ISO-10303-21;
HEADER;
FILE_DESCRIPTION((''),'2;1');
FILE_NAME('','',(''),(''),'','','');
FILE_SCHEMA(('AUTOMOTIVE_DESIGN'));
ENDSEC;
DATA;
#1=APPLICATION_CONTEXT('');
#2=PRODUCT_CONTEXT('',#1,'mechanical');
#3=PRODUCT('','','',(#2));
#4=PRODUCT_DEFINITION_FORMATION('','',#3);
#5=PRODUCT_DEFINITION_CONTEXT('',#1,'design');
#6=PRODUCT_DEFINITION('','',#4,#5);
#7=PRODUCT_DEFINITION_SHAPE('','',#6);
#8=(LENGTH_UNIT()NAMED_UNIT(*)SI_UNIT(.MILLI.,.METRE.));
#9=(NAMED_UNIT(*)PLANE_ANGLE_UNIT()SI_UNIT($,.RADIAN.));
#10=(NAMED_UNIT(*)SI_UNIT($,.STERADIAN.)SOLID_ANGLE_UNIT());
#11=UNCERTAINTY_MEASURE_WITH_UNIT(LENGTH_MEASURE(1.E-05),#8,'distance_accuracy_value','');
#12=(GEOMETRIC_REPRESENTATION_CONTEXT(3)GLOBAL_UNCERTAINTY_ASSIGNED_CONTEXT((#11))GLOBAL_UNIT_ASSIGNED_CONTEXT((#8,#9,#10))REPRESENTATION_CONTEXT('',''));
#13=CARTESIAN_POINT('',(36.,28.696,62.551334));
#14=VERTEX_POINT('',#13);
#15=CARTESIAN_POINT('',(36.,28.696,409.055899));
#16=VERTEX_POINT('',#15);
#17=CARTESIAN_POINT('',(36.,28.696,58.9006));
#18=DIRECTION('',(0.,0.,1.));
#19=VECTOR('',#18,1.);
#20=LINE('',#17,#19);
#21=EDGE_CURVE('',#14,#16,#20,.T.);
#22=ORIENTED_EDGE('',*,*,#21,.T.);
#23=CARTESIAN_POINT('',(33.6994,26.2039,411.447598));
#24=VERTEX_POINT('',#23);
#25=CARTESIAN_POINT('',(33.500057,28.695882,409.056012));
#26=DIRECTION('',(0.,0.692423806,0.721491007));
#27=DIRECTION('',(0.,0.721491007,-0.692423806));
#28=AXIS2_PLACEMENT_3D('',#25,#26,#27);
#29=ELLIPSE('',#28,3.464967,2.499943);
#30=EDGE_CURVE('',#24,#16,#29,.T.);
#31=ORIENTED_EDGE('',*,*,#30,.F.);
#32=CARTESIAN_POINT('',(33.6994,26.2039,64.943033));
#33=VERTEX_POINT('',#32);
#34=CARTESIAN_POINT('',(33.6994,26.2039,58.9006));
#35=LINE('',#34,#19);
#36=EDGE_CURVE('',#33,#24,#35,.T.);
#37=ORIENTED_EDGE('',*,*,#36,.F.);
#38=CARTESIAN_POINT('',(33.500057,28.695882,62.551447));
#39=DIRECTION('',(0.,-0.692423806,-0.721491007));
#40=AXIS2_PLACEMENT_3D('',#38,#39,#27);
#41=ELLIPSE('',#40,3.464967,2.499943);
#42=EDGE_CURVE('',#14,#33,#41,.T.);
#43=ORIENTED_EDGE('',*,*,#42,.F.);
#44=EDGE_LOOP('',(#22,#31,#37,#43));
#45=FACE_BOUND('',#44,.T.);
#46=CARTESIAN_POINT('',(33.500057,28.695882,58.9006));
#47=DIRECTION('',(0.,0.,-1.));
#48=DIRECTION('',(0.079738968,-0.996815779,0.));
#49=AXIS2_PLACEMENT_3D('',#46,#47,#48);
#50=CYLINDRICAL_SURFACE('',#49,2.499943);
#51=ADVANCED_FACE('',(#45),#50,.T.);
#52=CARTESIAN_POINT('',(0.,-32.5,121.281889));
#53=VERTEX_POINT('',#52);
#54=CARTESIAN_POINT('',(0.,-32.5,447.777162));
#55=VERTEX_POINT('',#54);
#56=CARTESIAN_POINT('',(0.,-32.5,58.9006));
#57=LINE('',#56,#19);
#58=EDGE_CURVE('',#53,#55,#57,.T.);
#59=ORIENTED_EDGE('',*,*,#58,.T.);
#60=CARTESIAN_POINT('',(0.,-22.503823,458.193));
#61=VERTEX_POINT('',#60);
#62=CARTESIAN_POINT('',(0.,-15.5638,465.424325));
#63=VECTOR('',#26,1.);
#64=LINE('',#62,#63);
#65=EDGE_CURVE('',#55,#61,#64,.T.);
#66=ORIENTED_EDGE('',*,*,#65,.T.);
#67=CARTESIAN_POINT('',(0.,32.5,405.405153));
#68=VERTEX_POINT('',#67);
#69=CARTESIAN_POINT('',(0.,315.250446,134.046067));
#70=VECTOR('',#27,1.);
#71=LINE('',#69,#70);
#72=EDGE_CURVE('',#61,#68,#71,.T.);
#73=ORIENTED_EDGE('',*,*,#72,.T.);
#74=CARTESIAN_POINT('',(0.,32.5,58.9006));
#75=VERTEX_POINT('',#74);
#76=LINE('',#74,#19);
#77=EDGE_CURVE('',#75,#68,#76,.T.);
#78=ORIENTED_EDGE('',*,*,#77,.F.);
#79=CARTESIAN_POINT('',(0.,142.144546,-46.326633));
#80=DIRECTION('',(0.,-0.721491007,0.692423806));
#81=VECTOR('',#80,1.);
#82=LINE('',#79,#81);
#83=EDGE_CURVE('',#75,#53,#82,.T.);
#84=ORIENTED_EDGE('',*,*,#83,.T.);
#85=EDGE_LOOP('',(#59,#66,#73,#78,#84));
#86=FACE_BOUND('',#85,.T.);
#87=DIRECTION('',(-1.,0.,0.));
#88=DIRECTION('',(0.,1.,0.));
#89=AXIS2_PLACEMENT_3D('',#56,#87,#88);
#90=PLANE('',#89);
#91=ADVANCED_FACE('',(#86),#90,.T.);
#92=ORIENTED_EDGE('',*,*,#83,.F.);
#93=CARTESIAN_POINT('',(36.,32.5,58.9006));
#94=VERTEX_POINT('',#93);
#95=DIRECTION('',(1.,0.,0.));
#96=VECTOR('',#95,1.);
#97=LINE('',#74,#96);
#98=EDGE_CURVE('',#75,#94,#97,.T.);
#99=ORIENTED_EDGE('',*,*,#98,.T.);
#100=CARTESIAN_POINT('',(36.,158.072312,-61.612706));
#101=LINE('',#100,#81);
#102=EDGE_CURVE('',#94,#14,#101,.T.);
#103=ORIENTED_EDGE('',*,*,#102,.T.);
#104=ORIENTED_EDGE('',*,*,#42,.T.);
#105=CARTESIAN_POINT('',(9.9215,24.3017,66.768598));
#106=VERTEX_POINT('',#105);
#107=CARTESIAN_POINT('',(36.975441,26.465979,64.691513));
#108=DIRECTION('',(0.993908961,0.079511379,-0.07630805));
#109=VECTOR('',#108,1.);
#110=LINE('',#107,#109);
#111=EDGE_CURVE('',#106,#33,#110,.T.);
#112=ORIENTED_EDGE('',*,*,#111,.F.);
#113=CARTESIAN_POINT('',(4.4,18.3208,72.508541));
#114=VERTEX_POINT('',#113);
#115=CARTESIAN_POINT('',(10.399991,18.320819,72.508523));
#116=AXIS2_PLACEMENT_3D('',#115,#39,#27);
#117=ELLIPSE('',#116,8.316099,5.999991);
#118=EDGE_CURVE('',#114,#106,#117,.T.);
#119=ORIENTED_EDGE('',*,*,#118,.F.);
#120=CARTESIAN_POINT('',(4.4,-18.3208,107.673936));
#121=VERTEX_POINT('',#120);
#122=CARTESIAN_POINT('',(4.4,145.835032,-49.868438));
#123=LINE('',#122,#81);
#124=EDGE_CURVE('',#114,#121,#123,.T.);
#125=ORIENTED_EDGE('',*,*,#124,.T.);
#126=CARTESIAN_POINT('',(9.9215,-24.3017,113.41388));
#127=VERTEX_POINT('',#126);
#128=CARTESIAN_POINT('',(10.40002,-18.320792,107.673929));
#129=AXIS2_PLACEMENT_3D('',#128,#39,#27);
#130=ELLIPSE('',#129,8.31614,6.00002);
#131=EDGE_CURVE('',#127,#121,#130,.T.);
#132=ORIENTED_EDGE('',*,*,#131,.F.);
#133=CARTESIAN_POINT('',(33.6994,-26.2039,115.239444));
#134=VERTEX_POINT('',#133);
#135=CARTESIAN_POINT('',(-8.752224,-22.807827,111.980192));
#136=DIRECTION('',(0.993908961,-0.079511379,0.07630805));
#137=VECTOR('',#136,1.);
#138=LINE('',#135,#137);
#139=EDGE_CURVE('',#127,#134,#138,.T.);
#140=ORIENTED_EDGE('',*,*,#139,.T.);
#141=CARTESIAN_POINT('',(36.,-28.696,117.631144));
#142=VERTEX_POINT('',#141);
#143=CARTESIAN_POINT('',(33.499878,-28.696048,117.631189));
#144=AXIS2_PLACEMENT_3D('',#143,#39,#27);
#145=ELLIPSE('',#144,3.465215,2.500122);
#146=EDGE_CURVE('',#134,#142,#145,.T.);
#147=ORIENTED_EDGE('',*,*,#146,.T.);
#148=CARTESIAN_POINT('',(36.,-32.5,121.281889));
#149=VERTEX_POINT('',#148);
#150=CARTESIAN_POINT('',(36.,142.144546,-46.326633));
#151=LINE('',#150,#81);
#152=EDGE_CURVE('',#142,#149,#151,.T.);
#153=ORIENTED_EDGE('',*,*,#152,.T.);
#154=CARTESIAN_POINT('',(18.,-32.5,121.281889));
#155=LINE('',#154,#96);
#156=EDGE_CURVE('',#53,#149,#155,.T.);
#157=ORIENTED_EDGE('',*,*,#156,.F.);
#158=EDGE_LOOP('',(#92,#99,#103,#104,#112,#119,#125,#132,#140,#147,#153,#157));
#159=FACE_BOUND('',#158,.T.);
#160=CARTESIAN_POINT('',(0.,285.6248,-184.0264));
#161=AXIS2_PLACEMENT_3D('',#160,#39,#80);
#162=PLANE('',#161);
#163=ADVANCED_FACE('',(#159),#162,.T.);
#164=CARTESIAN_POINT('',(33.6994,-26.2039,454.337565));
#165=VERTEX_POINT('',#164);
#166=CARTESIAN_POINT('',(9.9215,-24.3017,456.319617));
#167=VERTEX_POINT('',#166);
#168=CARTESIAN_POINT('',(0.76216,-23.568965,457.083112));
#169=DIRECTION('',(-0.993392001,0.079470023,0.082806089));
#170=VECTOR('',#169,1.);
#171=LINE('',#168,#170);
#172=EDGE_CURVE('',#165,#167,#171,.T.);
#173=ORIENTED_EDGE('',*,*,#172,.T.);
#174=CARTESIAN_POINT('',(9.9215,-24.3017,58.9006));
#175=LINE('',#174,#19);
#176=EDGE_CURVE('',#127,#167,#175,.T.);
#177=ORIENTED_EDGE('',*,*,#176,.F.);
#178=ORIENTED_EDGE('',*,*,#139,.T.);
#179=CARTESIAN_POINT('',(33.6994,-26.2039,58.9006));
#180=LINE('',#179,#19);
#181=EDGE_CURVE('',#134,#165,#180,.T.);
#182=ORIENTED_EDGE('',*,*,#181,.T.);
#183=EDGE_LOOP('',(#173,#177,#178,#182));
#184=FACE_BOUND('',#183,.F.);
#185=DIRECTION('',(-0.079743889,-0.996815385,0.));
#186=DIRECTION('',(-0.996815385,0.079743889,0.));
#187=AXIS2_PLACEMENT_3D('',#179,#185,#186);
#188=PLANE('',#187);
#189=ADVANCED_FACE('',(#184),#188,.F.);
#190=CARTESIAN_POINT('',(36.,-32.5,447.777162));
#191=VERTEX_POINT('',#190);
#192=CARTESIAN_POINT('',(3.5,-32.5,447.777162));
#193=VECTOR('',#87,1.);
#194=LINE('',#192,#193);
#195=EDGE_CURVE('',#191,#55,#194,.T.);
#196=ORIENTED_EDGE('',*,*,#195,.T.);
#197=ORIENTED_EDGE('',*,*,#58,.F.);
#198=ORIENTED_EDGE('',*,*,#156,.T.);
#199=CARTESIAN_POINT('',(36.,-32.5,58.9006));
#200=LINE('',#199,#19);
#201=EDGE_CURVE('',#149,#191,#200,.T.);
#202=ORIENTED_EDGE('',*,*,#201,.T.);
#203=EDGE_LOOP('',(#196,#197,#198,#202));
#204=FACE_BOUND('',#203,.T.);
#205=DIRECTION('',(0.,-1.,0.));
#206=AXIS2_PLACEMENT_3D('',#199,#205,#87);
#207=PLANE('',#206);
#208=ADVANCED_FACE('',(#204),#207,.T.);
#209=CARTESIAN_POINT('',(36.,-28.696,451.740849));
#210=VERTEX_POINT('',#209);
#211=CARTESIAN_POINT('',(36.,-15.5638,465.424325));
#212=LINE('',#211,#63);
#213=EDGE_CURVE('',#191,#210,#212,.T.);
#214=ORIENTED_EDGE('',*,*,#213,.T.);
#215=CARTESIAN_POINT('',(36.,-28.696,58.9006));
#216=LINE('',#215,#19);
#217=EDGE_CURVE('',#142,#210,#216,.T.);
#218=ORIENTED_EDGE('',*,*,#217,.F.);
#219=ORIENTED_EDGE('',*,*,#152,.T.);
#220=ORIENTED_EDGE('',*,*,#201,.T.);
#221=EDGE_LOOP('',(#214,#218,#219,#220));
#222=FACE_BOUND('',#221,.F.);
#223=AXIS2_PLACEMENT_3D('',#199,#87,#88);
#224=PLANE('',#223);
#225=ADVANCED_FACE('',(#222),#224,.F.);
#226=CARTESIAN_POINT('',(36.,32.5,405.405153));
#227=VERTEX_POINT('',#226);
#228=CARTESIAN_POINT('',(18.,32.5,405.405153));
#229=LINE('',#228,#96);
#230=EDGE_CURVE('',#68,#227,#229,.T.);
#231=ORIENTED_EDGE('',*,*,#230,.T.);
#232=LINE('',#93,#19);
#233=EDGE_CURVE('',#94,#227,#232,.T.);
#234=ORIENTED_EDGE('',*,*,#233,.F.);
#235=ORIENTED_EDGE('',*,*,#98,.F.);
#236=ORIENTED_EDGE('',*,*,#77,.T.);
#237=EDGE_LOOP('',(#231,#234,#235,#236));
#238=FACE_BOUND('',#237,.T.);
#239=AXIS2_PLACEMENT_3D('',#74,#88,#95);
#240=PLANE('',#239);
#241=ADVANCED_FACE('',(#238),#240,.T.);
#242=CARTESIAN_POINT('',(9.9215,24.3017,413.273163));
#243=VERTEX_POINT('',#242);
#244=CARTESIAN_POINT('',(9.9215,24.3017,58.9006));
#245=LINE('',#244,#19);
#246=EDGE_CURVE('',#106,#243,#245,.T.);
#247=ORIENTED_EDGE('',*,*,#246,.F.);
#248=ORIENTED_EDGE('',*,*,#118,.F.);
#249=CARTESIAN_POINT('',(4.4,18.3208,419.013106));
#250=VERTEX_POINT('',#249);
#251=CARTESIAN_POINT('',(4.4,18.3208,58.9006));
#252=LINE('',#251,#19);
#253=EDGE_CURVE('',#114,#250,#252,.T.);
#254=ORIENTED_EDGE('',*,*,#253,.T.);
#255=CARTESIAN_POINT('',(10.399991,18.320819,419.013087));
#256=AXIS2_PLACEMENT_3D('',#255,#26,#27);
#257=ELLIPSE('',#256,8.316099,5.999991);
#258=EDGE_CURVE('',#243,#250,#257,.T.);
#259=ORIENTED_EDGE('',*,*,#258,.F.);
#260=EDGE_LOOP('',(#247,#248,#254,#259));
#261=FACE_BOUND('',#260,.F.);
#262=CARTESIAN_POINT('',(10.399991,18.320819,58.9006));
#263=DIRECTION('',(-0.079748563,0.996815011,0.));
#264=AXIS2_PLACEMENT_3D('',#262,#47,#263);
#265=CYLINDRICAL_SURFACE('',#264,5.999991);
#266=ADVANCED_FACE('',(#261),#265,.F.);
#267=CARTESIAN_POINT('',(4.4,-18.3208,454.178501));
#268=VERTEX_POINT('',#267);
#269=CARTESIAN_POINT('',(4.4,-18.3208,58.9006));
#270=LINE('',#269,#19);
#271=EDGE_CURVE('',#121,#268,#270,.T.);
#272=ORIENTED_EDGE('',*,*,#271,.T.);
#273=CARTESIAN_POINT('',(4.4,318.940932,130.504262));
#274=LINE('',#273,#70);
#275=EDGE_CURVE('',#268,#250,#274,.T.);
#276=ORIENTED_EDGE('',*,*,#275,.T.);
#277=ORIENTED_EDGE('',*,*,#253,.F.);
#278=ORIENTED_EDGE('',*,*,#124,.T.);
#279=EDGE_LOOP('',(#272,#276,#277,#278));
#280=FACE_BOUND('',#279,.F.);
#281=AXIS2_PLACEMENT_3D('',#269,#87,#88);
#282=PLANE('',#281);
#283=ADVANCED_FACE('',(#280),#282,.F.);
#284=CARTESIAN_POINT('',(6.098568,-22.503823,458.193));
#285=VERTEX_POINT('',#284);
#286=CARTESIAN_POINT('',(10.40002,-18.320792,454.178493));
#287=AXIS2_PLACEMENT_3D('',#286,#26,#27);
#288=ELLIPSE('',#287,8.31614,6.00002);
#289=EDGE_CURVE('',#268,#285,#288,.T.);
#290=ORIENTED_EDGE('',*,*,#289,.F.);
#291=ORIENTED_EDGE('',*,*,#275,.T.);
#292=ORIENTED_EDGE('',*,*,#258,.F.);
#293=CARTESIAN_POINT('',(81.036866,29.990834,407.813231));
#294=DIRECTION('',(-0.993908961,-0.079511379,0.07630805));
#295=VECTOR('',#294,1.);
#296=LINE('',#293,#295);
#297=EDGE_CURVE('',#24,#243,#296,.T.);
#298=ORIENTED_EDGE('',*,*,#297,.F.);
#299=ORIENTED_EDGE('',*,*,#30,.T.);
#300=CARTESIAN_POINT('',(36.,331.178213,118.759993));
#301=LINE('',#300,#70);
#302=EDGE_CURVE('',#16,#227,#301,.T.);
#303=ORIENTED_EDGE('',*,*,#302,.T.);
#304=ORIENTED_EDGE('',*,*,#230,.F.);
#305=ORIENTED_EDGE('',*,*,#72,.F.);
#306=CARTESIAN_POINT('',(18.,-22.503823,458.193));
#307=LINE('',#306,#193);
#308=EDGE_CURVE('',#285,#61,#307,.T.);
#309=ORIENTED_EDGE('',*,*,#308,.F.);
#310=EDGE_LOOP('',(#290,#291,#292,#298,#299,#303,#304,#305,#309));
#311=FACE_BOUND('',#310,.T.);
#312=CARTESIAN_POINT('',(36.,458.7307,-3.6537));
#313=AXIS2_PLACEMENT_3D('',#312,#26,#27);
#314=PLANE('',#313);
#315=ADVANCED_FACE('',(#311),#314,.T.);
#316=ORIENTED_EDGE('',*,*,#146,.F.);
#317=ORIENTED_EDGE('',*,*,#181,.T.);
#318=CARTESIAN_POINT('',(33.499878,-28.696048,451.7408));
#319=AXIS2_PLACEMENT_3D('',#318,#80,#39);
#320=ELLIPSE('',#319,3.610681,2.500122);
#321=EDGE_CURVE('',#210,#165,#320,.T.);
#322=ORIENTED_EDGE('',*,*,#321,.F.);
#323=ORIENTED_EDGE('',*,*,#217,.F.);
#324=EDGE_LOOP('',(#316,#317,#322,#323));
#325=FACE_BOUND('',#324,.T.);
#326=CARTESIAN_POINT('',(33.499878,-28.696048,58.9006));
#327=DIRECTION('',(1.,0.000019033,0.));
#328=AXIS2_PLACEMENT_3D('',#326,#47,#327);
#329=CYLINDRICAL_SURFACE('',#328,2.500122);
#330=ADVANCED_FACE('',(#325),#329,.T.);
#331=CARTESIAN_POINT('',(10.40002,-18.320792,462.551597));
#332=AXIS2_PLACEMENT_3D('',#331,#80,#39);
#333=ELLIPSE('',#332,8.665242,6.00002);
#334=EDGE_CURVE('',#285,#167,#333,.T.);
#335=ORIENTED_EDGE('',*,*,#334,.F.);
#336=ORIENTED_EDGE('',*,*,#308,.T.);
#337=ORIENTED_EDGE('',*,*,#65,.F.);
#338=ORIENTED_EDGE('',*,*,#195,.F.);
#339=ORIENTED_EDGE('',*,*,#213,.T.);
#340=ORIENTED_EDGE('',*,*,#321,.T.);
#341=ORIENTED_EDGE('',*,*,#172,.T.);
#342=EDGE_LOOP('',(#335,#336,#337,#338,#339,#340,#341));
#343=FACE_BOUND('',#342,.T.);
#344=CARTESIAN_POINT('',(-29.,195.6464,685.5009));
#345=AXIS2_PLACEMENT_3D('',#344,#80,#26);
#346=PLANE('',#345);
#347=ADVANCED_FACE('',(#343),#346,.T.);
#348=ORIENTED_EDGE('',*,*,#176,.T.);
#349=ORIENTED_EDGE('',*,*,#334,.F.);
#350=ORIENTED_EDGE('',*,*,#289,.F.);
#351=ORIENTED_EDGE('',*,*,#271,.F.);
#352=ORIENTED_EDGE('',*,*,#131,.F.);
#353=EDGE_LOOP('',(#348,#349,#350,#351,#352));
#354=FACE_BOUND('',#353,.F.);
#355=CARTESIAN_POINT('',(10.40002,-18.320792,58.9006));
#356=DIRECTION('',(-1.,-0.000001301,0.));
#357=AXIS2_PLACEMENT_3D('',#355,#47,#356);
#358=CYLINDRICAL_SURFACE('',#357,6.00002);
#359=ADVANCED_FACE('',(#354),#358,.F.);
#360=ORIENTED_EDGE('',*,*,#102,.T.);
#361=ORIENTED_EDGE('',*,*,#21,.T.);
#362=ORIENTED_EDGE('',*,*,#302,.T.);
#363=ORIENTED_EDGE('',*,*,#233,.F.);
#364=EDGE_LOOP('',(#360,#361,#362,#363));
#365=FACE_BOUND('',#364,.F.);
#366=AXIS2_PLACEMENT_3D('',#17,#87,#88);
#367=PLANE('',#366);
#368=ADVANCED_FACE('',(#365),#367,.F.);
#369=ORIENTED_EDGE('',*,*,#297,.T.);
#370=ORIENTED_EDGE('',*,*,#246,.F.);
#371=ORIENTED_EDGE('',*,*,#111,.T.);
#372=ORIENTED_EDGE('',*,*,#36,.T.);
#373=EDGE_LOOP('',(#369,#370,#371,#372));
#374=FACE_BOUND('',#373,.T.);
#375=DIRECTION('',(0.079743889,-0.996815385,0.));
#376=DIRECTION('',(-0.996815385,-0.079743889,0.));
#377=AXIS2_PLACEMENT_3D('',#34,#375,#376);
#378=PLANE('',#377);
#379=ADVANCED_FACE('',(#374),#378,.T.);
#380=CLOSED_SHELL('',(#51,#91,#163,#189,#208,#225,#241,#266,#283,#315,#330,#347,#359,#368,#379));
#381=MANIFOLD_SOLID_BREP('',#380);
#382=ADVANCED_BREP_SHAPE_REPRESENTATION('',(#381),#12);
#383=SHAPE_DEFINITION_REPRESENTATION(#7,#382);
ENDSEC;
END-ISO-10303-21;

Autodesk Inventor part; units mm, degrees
ref_plane "Начальная плоскость" through (0, 0, 58.9006) normal (0, 0, 1) x (1, 0, 0)
ref_plane "Конечная плоскость" through (0, 0, 458.193) normal (0, 0, 1) x (1, 0, 0)
sketch "Эскиз" plane through (0, 0, 0) normal (0, 0, 1) x (1, 0, 0)
  line L0 (36, -32.5) -> (0, -32.5)
  line L1 (36, -32.5) -> (36, -28.696)
  line L2 (33.6994, -26.2039) -> (9.9215, -24.3017)
  line L3 (4.4, -18.3208) -> (4.4, 18.3208)
  line L4 (33.6994, 26.2039) -> (9.9215, 24.3017)
  line L5 (36, 28.696) -> (36, 32.5)
  line L6 (0, 32.5) -> (36, 32.5)
  line L7 (0, -32.5) -> (0, 32.5)
  arc A0 (4.4, -18.3208) -> (9.9215, -24.3017) centre (10.4, -18.3208) ccw
  arc A1 (9.9215, 24.3017) -> (4.4, 18.3208) centre (10.4, 18.3208) ccw
  arc A2 (36, -28.696) -> (33.6994, -26.2039) centre (33.5, -28.696) ccw
  arc A3 (33.6994, 26.2039) -> (36, 28.696) centre (33.5, 28.696) ccw
  line L8 (0, 45.5) -> (0, -45.5) construction
  line L9 (-7.2974, 0) -> (43.7847, 0) construction
  point P0 (36, -26.388)
  point P1 (4.4, -23.86)
  point P2 (4.4, 23.86)
  point P3 (36, 26.388)
  dimension "d3" = 36
  dimension "d5" = 4.4
  dimension "d7" = 65
  dimension "d9" = 8.64
  dimension "d11" = 8.64
  dimension "d13" = 6.112
  dimension "d15" = 6.112
  dimension "d22" = 6
  dimension "d23" = 2.5
  dimension "d24" = 32.5
  dimension "d25" = 0
extrude "Тело" add sketch "Эскиз" along normal up to surface (399.2924 mm away) from surface at 58.9006
sketch "Sketch3" plane through (0, 0, 0) normal (0, 0, 1) x (1, 0, 0)
  line L0 (0, 0) -> (10, 0)
ref_plane "Work Plane7" through (0, 0, 0) normal (0, -1, 0) x (1, 0, 0)
sketch "Sketch4" plane through (0, 0, 0) normal (0, -1, 0) x (1, 0, 0)
  line L0 (-2, 58.9006) -> (12, 58.9006)
  line L1 (-2, 458.193) -> (12, 458.193)
  dimension "d29" = 399.2924
ref_plane "РабПлоскость8" through (0, 285.6248, -184.0264) normal (0, -0.6924238, -0.721491) x (1, 0, 0)
split "Разделение1" plane through (0, 285.6248, -184.0264) removes the side toward (0, -0.6924238, -0.721491)
ref_plane "РабПлоскость9" through (36, 458.7307, -3.6537) normal (0, 0.6924238, 0.721491) x (1, 0, 0)
split "Разделение2" plane through (36, 458.7307, -3.6537) removes the side toward (0, 0.6924238, 0.721491)
ref_plane "РабПлоскость10" through (-29, 195.6464, 685.5009) normal (0, -0.721491, 0.6924238) x (1, 0, 0)
split "Разделение3" plane through (-29, 195.6464, 685.5009) removes the side toward (0, -0.721491, 0.6924238)
equation "\"d3\" = b"
equation "\"d5\" = t1"
equation "\"d7\" = ParH"
equation "\"d9\" = msp_x1 + t2"
equation "\"d11\" = msp_x1 + t2"
equation "\"d13\" = -msp_x2 + t2"
equation "\"d15\" = -msp_x2 + t2"
equation "\"d22\" = R"
equation "\"d23\" = R1"
equation "\"d24\" = 0.5 * d7"
equation "\"d16\" = G_L"
equation "\"R1\" = 2.5"
equation "\"R\" = 6"
equation "\"t1\" = 4.4"
equation "\"t2\" = 7.2"
equation "\"ParH\" = 65"
equation "\"b\" = 36"
equation "\"msp_x1\" = 0.04 * b"
equation "\"msp_x2\" = -0.08 * t1 + 0.04 * b"
equation "\"G_L\" = d29"
equation "\"ex\" = 0"
equation "\"G_OFFSET_START\" = -58.90056"
equation "\"G_OFFSET_END\" = -23.44846"
equation "\"d26\" = -G_OFFSET_START"
equation "\"d27\" = G_OFFSET_END + B_L"
equation "\"B_L\" = 481.64146"
properties part number "Швеллер 6.5U-399,29 ГОСТ 8240-97" material "Сталь, мягкая"
